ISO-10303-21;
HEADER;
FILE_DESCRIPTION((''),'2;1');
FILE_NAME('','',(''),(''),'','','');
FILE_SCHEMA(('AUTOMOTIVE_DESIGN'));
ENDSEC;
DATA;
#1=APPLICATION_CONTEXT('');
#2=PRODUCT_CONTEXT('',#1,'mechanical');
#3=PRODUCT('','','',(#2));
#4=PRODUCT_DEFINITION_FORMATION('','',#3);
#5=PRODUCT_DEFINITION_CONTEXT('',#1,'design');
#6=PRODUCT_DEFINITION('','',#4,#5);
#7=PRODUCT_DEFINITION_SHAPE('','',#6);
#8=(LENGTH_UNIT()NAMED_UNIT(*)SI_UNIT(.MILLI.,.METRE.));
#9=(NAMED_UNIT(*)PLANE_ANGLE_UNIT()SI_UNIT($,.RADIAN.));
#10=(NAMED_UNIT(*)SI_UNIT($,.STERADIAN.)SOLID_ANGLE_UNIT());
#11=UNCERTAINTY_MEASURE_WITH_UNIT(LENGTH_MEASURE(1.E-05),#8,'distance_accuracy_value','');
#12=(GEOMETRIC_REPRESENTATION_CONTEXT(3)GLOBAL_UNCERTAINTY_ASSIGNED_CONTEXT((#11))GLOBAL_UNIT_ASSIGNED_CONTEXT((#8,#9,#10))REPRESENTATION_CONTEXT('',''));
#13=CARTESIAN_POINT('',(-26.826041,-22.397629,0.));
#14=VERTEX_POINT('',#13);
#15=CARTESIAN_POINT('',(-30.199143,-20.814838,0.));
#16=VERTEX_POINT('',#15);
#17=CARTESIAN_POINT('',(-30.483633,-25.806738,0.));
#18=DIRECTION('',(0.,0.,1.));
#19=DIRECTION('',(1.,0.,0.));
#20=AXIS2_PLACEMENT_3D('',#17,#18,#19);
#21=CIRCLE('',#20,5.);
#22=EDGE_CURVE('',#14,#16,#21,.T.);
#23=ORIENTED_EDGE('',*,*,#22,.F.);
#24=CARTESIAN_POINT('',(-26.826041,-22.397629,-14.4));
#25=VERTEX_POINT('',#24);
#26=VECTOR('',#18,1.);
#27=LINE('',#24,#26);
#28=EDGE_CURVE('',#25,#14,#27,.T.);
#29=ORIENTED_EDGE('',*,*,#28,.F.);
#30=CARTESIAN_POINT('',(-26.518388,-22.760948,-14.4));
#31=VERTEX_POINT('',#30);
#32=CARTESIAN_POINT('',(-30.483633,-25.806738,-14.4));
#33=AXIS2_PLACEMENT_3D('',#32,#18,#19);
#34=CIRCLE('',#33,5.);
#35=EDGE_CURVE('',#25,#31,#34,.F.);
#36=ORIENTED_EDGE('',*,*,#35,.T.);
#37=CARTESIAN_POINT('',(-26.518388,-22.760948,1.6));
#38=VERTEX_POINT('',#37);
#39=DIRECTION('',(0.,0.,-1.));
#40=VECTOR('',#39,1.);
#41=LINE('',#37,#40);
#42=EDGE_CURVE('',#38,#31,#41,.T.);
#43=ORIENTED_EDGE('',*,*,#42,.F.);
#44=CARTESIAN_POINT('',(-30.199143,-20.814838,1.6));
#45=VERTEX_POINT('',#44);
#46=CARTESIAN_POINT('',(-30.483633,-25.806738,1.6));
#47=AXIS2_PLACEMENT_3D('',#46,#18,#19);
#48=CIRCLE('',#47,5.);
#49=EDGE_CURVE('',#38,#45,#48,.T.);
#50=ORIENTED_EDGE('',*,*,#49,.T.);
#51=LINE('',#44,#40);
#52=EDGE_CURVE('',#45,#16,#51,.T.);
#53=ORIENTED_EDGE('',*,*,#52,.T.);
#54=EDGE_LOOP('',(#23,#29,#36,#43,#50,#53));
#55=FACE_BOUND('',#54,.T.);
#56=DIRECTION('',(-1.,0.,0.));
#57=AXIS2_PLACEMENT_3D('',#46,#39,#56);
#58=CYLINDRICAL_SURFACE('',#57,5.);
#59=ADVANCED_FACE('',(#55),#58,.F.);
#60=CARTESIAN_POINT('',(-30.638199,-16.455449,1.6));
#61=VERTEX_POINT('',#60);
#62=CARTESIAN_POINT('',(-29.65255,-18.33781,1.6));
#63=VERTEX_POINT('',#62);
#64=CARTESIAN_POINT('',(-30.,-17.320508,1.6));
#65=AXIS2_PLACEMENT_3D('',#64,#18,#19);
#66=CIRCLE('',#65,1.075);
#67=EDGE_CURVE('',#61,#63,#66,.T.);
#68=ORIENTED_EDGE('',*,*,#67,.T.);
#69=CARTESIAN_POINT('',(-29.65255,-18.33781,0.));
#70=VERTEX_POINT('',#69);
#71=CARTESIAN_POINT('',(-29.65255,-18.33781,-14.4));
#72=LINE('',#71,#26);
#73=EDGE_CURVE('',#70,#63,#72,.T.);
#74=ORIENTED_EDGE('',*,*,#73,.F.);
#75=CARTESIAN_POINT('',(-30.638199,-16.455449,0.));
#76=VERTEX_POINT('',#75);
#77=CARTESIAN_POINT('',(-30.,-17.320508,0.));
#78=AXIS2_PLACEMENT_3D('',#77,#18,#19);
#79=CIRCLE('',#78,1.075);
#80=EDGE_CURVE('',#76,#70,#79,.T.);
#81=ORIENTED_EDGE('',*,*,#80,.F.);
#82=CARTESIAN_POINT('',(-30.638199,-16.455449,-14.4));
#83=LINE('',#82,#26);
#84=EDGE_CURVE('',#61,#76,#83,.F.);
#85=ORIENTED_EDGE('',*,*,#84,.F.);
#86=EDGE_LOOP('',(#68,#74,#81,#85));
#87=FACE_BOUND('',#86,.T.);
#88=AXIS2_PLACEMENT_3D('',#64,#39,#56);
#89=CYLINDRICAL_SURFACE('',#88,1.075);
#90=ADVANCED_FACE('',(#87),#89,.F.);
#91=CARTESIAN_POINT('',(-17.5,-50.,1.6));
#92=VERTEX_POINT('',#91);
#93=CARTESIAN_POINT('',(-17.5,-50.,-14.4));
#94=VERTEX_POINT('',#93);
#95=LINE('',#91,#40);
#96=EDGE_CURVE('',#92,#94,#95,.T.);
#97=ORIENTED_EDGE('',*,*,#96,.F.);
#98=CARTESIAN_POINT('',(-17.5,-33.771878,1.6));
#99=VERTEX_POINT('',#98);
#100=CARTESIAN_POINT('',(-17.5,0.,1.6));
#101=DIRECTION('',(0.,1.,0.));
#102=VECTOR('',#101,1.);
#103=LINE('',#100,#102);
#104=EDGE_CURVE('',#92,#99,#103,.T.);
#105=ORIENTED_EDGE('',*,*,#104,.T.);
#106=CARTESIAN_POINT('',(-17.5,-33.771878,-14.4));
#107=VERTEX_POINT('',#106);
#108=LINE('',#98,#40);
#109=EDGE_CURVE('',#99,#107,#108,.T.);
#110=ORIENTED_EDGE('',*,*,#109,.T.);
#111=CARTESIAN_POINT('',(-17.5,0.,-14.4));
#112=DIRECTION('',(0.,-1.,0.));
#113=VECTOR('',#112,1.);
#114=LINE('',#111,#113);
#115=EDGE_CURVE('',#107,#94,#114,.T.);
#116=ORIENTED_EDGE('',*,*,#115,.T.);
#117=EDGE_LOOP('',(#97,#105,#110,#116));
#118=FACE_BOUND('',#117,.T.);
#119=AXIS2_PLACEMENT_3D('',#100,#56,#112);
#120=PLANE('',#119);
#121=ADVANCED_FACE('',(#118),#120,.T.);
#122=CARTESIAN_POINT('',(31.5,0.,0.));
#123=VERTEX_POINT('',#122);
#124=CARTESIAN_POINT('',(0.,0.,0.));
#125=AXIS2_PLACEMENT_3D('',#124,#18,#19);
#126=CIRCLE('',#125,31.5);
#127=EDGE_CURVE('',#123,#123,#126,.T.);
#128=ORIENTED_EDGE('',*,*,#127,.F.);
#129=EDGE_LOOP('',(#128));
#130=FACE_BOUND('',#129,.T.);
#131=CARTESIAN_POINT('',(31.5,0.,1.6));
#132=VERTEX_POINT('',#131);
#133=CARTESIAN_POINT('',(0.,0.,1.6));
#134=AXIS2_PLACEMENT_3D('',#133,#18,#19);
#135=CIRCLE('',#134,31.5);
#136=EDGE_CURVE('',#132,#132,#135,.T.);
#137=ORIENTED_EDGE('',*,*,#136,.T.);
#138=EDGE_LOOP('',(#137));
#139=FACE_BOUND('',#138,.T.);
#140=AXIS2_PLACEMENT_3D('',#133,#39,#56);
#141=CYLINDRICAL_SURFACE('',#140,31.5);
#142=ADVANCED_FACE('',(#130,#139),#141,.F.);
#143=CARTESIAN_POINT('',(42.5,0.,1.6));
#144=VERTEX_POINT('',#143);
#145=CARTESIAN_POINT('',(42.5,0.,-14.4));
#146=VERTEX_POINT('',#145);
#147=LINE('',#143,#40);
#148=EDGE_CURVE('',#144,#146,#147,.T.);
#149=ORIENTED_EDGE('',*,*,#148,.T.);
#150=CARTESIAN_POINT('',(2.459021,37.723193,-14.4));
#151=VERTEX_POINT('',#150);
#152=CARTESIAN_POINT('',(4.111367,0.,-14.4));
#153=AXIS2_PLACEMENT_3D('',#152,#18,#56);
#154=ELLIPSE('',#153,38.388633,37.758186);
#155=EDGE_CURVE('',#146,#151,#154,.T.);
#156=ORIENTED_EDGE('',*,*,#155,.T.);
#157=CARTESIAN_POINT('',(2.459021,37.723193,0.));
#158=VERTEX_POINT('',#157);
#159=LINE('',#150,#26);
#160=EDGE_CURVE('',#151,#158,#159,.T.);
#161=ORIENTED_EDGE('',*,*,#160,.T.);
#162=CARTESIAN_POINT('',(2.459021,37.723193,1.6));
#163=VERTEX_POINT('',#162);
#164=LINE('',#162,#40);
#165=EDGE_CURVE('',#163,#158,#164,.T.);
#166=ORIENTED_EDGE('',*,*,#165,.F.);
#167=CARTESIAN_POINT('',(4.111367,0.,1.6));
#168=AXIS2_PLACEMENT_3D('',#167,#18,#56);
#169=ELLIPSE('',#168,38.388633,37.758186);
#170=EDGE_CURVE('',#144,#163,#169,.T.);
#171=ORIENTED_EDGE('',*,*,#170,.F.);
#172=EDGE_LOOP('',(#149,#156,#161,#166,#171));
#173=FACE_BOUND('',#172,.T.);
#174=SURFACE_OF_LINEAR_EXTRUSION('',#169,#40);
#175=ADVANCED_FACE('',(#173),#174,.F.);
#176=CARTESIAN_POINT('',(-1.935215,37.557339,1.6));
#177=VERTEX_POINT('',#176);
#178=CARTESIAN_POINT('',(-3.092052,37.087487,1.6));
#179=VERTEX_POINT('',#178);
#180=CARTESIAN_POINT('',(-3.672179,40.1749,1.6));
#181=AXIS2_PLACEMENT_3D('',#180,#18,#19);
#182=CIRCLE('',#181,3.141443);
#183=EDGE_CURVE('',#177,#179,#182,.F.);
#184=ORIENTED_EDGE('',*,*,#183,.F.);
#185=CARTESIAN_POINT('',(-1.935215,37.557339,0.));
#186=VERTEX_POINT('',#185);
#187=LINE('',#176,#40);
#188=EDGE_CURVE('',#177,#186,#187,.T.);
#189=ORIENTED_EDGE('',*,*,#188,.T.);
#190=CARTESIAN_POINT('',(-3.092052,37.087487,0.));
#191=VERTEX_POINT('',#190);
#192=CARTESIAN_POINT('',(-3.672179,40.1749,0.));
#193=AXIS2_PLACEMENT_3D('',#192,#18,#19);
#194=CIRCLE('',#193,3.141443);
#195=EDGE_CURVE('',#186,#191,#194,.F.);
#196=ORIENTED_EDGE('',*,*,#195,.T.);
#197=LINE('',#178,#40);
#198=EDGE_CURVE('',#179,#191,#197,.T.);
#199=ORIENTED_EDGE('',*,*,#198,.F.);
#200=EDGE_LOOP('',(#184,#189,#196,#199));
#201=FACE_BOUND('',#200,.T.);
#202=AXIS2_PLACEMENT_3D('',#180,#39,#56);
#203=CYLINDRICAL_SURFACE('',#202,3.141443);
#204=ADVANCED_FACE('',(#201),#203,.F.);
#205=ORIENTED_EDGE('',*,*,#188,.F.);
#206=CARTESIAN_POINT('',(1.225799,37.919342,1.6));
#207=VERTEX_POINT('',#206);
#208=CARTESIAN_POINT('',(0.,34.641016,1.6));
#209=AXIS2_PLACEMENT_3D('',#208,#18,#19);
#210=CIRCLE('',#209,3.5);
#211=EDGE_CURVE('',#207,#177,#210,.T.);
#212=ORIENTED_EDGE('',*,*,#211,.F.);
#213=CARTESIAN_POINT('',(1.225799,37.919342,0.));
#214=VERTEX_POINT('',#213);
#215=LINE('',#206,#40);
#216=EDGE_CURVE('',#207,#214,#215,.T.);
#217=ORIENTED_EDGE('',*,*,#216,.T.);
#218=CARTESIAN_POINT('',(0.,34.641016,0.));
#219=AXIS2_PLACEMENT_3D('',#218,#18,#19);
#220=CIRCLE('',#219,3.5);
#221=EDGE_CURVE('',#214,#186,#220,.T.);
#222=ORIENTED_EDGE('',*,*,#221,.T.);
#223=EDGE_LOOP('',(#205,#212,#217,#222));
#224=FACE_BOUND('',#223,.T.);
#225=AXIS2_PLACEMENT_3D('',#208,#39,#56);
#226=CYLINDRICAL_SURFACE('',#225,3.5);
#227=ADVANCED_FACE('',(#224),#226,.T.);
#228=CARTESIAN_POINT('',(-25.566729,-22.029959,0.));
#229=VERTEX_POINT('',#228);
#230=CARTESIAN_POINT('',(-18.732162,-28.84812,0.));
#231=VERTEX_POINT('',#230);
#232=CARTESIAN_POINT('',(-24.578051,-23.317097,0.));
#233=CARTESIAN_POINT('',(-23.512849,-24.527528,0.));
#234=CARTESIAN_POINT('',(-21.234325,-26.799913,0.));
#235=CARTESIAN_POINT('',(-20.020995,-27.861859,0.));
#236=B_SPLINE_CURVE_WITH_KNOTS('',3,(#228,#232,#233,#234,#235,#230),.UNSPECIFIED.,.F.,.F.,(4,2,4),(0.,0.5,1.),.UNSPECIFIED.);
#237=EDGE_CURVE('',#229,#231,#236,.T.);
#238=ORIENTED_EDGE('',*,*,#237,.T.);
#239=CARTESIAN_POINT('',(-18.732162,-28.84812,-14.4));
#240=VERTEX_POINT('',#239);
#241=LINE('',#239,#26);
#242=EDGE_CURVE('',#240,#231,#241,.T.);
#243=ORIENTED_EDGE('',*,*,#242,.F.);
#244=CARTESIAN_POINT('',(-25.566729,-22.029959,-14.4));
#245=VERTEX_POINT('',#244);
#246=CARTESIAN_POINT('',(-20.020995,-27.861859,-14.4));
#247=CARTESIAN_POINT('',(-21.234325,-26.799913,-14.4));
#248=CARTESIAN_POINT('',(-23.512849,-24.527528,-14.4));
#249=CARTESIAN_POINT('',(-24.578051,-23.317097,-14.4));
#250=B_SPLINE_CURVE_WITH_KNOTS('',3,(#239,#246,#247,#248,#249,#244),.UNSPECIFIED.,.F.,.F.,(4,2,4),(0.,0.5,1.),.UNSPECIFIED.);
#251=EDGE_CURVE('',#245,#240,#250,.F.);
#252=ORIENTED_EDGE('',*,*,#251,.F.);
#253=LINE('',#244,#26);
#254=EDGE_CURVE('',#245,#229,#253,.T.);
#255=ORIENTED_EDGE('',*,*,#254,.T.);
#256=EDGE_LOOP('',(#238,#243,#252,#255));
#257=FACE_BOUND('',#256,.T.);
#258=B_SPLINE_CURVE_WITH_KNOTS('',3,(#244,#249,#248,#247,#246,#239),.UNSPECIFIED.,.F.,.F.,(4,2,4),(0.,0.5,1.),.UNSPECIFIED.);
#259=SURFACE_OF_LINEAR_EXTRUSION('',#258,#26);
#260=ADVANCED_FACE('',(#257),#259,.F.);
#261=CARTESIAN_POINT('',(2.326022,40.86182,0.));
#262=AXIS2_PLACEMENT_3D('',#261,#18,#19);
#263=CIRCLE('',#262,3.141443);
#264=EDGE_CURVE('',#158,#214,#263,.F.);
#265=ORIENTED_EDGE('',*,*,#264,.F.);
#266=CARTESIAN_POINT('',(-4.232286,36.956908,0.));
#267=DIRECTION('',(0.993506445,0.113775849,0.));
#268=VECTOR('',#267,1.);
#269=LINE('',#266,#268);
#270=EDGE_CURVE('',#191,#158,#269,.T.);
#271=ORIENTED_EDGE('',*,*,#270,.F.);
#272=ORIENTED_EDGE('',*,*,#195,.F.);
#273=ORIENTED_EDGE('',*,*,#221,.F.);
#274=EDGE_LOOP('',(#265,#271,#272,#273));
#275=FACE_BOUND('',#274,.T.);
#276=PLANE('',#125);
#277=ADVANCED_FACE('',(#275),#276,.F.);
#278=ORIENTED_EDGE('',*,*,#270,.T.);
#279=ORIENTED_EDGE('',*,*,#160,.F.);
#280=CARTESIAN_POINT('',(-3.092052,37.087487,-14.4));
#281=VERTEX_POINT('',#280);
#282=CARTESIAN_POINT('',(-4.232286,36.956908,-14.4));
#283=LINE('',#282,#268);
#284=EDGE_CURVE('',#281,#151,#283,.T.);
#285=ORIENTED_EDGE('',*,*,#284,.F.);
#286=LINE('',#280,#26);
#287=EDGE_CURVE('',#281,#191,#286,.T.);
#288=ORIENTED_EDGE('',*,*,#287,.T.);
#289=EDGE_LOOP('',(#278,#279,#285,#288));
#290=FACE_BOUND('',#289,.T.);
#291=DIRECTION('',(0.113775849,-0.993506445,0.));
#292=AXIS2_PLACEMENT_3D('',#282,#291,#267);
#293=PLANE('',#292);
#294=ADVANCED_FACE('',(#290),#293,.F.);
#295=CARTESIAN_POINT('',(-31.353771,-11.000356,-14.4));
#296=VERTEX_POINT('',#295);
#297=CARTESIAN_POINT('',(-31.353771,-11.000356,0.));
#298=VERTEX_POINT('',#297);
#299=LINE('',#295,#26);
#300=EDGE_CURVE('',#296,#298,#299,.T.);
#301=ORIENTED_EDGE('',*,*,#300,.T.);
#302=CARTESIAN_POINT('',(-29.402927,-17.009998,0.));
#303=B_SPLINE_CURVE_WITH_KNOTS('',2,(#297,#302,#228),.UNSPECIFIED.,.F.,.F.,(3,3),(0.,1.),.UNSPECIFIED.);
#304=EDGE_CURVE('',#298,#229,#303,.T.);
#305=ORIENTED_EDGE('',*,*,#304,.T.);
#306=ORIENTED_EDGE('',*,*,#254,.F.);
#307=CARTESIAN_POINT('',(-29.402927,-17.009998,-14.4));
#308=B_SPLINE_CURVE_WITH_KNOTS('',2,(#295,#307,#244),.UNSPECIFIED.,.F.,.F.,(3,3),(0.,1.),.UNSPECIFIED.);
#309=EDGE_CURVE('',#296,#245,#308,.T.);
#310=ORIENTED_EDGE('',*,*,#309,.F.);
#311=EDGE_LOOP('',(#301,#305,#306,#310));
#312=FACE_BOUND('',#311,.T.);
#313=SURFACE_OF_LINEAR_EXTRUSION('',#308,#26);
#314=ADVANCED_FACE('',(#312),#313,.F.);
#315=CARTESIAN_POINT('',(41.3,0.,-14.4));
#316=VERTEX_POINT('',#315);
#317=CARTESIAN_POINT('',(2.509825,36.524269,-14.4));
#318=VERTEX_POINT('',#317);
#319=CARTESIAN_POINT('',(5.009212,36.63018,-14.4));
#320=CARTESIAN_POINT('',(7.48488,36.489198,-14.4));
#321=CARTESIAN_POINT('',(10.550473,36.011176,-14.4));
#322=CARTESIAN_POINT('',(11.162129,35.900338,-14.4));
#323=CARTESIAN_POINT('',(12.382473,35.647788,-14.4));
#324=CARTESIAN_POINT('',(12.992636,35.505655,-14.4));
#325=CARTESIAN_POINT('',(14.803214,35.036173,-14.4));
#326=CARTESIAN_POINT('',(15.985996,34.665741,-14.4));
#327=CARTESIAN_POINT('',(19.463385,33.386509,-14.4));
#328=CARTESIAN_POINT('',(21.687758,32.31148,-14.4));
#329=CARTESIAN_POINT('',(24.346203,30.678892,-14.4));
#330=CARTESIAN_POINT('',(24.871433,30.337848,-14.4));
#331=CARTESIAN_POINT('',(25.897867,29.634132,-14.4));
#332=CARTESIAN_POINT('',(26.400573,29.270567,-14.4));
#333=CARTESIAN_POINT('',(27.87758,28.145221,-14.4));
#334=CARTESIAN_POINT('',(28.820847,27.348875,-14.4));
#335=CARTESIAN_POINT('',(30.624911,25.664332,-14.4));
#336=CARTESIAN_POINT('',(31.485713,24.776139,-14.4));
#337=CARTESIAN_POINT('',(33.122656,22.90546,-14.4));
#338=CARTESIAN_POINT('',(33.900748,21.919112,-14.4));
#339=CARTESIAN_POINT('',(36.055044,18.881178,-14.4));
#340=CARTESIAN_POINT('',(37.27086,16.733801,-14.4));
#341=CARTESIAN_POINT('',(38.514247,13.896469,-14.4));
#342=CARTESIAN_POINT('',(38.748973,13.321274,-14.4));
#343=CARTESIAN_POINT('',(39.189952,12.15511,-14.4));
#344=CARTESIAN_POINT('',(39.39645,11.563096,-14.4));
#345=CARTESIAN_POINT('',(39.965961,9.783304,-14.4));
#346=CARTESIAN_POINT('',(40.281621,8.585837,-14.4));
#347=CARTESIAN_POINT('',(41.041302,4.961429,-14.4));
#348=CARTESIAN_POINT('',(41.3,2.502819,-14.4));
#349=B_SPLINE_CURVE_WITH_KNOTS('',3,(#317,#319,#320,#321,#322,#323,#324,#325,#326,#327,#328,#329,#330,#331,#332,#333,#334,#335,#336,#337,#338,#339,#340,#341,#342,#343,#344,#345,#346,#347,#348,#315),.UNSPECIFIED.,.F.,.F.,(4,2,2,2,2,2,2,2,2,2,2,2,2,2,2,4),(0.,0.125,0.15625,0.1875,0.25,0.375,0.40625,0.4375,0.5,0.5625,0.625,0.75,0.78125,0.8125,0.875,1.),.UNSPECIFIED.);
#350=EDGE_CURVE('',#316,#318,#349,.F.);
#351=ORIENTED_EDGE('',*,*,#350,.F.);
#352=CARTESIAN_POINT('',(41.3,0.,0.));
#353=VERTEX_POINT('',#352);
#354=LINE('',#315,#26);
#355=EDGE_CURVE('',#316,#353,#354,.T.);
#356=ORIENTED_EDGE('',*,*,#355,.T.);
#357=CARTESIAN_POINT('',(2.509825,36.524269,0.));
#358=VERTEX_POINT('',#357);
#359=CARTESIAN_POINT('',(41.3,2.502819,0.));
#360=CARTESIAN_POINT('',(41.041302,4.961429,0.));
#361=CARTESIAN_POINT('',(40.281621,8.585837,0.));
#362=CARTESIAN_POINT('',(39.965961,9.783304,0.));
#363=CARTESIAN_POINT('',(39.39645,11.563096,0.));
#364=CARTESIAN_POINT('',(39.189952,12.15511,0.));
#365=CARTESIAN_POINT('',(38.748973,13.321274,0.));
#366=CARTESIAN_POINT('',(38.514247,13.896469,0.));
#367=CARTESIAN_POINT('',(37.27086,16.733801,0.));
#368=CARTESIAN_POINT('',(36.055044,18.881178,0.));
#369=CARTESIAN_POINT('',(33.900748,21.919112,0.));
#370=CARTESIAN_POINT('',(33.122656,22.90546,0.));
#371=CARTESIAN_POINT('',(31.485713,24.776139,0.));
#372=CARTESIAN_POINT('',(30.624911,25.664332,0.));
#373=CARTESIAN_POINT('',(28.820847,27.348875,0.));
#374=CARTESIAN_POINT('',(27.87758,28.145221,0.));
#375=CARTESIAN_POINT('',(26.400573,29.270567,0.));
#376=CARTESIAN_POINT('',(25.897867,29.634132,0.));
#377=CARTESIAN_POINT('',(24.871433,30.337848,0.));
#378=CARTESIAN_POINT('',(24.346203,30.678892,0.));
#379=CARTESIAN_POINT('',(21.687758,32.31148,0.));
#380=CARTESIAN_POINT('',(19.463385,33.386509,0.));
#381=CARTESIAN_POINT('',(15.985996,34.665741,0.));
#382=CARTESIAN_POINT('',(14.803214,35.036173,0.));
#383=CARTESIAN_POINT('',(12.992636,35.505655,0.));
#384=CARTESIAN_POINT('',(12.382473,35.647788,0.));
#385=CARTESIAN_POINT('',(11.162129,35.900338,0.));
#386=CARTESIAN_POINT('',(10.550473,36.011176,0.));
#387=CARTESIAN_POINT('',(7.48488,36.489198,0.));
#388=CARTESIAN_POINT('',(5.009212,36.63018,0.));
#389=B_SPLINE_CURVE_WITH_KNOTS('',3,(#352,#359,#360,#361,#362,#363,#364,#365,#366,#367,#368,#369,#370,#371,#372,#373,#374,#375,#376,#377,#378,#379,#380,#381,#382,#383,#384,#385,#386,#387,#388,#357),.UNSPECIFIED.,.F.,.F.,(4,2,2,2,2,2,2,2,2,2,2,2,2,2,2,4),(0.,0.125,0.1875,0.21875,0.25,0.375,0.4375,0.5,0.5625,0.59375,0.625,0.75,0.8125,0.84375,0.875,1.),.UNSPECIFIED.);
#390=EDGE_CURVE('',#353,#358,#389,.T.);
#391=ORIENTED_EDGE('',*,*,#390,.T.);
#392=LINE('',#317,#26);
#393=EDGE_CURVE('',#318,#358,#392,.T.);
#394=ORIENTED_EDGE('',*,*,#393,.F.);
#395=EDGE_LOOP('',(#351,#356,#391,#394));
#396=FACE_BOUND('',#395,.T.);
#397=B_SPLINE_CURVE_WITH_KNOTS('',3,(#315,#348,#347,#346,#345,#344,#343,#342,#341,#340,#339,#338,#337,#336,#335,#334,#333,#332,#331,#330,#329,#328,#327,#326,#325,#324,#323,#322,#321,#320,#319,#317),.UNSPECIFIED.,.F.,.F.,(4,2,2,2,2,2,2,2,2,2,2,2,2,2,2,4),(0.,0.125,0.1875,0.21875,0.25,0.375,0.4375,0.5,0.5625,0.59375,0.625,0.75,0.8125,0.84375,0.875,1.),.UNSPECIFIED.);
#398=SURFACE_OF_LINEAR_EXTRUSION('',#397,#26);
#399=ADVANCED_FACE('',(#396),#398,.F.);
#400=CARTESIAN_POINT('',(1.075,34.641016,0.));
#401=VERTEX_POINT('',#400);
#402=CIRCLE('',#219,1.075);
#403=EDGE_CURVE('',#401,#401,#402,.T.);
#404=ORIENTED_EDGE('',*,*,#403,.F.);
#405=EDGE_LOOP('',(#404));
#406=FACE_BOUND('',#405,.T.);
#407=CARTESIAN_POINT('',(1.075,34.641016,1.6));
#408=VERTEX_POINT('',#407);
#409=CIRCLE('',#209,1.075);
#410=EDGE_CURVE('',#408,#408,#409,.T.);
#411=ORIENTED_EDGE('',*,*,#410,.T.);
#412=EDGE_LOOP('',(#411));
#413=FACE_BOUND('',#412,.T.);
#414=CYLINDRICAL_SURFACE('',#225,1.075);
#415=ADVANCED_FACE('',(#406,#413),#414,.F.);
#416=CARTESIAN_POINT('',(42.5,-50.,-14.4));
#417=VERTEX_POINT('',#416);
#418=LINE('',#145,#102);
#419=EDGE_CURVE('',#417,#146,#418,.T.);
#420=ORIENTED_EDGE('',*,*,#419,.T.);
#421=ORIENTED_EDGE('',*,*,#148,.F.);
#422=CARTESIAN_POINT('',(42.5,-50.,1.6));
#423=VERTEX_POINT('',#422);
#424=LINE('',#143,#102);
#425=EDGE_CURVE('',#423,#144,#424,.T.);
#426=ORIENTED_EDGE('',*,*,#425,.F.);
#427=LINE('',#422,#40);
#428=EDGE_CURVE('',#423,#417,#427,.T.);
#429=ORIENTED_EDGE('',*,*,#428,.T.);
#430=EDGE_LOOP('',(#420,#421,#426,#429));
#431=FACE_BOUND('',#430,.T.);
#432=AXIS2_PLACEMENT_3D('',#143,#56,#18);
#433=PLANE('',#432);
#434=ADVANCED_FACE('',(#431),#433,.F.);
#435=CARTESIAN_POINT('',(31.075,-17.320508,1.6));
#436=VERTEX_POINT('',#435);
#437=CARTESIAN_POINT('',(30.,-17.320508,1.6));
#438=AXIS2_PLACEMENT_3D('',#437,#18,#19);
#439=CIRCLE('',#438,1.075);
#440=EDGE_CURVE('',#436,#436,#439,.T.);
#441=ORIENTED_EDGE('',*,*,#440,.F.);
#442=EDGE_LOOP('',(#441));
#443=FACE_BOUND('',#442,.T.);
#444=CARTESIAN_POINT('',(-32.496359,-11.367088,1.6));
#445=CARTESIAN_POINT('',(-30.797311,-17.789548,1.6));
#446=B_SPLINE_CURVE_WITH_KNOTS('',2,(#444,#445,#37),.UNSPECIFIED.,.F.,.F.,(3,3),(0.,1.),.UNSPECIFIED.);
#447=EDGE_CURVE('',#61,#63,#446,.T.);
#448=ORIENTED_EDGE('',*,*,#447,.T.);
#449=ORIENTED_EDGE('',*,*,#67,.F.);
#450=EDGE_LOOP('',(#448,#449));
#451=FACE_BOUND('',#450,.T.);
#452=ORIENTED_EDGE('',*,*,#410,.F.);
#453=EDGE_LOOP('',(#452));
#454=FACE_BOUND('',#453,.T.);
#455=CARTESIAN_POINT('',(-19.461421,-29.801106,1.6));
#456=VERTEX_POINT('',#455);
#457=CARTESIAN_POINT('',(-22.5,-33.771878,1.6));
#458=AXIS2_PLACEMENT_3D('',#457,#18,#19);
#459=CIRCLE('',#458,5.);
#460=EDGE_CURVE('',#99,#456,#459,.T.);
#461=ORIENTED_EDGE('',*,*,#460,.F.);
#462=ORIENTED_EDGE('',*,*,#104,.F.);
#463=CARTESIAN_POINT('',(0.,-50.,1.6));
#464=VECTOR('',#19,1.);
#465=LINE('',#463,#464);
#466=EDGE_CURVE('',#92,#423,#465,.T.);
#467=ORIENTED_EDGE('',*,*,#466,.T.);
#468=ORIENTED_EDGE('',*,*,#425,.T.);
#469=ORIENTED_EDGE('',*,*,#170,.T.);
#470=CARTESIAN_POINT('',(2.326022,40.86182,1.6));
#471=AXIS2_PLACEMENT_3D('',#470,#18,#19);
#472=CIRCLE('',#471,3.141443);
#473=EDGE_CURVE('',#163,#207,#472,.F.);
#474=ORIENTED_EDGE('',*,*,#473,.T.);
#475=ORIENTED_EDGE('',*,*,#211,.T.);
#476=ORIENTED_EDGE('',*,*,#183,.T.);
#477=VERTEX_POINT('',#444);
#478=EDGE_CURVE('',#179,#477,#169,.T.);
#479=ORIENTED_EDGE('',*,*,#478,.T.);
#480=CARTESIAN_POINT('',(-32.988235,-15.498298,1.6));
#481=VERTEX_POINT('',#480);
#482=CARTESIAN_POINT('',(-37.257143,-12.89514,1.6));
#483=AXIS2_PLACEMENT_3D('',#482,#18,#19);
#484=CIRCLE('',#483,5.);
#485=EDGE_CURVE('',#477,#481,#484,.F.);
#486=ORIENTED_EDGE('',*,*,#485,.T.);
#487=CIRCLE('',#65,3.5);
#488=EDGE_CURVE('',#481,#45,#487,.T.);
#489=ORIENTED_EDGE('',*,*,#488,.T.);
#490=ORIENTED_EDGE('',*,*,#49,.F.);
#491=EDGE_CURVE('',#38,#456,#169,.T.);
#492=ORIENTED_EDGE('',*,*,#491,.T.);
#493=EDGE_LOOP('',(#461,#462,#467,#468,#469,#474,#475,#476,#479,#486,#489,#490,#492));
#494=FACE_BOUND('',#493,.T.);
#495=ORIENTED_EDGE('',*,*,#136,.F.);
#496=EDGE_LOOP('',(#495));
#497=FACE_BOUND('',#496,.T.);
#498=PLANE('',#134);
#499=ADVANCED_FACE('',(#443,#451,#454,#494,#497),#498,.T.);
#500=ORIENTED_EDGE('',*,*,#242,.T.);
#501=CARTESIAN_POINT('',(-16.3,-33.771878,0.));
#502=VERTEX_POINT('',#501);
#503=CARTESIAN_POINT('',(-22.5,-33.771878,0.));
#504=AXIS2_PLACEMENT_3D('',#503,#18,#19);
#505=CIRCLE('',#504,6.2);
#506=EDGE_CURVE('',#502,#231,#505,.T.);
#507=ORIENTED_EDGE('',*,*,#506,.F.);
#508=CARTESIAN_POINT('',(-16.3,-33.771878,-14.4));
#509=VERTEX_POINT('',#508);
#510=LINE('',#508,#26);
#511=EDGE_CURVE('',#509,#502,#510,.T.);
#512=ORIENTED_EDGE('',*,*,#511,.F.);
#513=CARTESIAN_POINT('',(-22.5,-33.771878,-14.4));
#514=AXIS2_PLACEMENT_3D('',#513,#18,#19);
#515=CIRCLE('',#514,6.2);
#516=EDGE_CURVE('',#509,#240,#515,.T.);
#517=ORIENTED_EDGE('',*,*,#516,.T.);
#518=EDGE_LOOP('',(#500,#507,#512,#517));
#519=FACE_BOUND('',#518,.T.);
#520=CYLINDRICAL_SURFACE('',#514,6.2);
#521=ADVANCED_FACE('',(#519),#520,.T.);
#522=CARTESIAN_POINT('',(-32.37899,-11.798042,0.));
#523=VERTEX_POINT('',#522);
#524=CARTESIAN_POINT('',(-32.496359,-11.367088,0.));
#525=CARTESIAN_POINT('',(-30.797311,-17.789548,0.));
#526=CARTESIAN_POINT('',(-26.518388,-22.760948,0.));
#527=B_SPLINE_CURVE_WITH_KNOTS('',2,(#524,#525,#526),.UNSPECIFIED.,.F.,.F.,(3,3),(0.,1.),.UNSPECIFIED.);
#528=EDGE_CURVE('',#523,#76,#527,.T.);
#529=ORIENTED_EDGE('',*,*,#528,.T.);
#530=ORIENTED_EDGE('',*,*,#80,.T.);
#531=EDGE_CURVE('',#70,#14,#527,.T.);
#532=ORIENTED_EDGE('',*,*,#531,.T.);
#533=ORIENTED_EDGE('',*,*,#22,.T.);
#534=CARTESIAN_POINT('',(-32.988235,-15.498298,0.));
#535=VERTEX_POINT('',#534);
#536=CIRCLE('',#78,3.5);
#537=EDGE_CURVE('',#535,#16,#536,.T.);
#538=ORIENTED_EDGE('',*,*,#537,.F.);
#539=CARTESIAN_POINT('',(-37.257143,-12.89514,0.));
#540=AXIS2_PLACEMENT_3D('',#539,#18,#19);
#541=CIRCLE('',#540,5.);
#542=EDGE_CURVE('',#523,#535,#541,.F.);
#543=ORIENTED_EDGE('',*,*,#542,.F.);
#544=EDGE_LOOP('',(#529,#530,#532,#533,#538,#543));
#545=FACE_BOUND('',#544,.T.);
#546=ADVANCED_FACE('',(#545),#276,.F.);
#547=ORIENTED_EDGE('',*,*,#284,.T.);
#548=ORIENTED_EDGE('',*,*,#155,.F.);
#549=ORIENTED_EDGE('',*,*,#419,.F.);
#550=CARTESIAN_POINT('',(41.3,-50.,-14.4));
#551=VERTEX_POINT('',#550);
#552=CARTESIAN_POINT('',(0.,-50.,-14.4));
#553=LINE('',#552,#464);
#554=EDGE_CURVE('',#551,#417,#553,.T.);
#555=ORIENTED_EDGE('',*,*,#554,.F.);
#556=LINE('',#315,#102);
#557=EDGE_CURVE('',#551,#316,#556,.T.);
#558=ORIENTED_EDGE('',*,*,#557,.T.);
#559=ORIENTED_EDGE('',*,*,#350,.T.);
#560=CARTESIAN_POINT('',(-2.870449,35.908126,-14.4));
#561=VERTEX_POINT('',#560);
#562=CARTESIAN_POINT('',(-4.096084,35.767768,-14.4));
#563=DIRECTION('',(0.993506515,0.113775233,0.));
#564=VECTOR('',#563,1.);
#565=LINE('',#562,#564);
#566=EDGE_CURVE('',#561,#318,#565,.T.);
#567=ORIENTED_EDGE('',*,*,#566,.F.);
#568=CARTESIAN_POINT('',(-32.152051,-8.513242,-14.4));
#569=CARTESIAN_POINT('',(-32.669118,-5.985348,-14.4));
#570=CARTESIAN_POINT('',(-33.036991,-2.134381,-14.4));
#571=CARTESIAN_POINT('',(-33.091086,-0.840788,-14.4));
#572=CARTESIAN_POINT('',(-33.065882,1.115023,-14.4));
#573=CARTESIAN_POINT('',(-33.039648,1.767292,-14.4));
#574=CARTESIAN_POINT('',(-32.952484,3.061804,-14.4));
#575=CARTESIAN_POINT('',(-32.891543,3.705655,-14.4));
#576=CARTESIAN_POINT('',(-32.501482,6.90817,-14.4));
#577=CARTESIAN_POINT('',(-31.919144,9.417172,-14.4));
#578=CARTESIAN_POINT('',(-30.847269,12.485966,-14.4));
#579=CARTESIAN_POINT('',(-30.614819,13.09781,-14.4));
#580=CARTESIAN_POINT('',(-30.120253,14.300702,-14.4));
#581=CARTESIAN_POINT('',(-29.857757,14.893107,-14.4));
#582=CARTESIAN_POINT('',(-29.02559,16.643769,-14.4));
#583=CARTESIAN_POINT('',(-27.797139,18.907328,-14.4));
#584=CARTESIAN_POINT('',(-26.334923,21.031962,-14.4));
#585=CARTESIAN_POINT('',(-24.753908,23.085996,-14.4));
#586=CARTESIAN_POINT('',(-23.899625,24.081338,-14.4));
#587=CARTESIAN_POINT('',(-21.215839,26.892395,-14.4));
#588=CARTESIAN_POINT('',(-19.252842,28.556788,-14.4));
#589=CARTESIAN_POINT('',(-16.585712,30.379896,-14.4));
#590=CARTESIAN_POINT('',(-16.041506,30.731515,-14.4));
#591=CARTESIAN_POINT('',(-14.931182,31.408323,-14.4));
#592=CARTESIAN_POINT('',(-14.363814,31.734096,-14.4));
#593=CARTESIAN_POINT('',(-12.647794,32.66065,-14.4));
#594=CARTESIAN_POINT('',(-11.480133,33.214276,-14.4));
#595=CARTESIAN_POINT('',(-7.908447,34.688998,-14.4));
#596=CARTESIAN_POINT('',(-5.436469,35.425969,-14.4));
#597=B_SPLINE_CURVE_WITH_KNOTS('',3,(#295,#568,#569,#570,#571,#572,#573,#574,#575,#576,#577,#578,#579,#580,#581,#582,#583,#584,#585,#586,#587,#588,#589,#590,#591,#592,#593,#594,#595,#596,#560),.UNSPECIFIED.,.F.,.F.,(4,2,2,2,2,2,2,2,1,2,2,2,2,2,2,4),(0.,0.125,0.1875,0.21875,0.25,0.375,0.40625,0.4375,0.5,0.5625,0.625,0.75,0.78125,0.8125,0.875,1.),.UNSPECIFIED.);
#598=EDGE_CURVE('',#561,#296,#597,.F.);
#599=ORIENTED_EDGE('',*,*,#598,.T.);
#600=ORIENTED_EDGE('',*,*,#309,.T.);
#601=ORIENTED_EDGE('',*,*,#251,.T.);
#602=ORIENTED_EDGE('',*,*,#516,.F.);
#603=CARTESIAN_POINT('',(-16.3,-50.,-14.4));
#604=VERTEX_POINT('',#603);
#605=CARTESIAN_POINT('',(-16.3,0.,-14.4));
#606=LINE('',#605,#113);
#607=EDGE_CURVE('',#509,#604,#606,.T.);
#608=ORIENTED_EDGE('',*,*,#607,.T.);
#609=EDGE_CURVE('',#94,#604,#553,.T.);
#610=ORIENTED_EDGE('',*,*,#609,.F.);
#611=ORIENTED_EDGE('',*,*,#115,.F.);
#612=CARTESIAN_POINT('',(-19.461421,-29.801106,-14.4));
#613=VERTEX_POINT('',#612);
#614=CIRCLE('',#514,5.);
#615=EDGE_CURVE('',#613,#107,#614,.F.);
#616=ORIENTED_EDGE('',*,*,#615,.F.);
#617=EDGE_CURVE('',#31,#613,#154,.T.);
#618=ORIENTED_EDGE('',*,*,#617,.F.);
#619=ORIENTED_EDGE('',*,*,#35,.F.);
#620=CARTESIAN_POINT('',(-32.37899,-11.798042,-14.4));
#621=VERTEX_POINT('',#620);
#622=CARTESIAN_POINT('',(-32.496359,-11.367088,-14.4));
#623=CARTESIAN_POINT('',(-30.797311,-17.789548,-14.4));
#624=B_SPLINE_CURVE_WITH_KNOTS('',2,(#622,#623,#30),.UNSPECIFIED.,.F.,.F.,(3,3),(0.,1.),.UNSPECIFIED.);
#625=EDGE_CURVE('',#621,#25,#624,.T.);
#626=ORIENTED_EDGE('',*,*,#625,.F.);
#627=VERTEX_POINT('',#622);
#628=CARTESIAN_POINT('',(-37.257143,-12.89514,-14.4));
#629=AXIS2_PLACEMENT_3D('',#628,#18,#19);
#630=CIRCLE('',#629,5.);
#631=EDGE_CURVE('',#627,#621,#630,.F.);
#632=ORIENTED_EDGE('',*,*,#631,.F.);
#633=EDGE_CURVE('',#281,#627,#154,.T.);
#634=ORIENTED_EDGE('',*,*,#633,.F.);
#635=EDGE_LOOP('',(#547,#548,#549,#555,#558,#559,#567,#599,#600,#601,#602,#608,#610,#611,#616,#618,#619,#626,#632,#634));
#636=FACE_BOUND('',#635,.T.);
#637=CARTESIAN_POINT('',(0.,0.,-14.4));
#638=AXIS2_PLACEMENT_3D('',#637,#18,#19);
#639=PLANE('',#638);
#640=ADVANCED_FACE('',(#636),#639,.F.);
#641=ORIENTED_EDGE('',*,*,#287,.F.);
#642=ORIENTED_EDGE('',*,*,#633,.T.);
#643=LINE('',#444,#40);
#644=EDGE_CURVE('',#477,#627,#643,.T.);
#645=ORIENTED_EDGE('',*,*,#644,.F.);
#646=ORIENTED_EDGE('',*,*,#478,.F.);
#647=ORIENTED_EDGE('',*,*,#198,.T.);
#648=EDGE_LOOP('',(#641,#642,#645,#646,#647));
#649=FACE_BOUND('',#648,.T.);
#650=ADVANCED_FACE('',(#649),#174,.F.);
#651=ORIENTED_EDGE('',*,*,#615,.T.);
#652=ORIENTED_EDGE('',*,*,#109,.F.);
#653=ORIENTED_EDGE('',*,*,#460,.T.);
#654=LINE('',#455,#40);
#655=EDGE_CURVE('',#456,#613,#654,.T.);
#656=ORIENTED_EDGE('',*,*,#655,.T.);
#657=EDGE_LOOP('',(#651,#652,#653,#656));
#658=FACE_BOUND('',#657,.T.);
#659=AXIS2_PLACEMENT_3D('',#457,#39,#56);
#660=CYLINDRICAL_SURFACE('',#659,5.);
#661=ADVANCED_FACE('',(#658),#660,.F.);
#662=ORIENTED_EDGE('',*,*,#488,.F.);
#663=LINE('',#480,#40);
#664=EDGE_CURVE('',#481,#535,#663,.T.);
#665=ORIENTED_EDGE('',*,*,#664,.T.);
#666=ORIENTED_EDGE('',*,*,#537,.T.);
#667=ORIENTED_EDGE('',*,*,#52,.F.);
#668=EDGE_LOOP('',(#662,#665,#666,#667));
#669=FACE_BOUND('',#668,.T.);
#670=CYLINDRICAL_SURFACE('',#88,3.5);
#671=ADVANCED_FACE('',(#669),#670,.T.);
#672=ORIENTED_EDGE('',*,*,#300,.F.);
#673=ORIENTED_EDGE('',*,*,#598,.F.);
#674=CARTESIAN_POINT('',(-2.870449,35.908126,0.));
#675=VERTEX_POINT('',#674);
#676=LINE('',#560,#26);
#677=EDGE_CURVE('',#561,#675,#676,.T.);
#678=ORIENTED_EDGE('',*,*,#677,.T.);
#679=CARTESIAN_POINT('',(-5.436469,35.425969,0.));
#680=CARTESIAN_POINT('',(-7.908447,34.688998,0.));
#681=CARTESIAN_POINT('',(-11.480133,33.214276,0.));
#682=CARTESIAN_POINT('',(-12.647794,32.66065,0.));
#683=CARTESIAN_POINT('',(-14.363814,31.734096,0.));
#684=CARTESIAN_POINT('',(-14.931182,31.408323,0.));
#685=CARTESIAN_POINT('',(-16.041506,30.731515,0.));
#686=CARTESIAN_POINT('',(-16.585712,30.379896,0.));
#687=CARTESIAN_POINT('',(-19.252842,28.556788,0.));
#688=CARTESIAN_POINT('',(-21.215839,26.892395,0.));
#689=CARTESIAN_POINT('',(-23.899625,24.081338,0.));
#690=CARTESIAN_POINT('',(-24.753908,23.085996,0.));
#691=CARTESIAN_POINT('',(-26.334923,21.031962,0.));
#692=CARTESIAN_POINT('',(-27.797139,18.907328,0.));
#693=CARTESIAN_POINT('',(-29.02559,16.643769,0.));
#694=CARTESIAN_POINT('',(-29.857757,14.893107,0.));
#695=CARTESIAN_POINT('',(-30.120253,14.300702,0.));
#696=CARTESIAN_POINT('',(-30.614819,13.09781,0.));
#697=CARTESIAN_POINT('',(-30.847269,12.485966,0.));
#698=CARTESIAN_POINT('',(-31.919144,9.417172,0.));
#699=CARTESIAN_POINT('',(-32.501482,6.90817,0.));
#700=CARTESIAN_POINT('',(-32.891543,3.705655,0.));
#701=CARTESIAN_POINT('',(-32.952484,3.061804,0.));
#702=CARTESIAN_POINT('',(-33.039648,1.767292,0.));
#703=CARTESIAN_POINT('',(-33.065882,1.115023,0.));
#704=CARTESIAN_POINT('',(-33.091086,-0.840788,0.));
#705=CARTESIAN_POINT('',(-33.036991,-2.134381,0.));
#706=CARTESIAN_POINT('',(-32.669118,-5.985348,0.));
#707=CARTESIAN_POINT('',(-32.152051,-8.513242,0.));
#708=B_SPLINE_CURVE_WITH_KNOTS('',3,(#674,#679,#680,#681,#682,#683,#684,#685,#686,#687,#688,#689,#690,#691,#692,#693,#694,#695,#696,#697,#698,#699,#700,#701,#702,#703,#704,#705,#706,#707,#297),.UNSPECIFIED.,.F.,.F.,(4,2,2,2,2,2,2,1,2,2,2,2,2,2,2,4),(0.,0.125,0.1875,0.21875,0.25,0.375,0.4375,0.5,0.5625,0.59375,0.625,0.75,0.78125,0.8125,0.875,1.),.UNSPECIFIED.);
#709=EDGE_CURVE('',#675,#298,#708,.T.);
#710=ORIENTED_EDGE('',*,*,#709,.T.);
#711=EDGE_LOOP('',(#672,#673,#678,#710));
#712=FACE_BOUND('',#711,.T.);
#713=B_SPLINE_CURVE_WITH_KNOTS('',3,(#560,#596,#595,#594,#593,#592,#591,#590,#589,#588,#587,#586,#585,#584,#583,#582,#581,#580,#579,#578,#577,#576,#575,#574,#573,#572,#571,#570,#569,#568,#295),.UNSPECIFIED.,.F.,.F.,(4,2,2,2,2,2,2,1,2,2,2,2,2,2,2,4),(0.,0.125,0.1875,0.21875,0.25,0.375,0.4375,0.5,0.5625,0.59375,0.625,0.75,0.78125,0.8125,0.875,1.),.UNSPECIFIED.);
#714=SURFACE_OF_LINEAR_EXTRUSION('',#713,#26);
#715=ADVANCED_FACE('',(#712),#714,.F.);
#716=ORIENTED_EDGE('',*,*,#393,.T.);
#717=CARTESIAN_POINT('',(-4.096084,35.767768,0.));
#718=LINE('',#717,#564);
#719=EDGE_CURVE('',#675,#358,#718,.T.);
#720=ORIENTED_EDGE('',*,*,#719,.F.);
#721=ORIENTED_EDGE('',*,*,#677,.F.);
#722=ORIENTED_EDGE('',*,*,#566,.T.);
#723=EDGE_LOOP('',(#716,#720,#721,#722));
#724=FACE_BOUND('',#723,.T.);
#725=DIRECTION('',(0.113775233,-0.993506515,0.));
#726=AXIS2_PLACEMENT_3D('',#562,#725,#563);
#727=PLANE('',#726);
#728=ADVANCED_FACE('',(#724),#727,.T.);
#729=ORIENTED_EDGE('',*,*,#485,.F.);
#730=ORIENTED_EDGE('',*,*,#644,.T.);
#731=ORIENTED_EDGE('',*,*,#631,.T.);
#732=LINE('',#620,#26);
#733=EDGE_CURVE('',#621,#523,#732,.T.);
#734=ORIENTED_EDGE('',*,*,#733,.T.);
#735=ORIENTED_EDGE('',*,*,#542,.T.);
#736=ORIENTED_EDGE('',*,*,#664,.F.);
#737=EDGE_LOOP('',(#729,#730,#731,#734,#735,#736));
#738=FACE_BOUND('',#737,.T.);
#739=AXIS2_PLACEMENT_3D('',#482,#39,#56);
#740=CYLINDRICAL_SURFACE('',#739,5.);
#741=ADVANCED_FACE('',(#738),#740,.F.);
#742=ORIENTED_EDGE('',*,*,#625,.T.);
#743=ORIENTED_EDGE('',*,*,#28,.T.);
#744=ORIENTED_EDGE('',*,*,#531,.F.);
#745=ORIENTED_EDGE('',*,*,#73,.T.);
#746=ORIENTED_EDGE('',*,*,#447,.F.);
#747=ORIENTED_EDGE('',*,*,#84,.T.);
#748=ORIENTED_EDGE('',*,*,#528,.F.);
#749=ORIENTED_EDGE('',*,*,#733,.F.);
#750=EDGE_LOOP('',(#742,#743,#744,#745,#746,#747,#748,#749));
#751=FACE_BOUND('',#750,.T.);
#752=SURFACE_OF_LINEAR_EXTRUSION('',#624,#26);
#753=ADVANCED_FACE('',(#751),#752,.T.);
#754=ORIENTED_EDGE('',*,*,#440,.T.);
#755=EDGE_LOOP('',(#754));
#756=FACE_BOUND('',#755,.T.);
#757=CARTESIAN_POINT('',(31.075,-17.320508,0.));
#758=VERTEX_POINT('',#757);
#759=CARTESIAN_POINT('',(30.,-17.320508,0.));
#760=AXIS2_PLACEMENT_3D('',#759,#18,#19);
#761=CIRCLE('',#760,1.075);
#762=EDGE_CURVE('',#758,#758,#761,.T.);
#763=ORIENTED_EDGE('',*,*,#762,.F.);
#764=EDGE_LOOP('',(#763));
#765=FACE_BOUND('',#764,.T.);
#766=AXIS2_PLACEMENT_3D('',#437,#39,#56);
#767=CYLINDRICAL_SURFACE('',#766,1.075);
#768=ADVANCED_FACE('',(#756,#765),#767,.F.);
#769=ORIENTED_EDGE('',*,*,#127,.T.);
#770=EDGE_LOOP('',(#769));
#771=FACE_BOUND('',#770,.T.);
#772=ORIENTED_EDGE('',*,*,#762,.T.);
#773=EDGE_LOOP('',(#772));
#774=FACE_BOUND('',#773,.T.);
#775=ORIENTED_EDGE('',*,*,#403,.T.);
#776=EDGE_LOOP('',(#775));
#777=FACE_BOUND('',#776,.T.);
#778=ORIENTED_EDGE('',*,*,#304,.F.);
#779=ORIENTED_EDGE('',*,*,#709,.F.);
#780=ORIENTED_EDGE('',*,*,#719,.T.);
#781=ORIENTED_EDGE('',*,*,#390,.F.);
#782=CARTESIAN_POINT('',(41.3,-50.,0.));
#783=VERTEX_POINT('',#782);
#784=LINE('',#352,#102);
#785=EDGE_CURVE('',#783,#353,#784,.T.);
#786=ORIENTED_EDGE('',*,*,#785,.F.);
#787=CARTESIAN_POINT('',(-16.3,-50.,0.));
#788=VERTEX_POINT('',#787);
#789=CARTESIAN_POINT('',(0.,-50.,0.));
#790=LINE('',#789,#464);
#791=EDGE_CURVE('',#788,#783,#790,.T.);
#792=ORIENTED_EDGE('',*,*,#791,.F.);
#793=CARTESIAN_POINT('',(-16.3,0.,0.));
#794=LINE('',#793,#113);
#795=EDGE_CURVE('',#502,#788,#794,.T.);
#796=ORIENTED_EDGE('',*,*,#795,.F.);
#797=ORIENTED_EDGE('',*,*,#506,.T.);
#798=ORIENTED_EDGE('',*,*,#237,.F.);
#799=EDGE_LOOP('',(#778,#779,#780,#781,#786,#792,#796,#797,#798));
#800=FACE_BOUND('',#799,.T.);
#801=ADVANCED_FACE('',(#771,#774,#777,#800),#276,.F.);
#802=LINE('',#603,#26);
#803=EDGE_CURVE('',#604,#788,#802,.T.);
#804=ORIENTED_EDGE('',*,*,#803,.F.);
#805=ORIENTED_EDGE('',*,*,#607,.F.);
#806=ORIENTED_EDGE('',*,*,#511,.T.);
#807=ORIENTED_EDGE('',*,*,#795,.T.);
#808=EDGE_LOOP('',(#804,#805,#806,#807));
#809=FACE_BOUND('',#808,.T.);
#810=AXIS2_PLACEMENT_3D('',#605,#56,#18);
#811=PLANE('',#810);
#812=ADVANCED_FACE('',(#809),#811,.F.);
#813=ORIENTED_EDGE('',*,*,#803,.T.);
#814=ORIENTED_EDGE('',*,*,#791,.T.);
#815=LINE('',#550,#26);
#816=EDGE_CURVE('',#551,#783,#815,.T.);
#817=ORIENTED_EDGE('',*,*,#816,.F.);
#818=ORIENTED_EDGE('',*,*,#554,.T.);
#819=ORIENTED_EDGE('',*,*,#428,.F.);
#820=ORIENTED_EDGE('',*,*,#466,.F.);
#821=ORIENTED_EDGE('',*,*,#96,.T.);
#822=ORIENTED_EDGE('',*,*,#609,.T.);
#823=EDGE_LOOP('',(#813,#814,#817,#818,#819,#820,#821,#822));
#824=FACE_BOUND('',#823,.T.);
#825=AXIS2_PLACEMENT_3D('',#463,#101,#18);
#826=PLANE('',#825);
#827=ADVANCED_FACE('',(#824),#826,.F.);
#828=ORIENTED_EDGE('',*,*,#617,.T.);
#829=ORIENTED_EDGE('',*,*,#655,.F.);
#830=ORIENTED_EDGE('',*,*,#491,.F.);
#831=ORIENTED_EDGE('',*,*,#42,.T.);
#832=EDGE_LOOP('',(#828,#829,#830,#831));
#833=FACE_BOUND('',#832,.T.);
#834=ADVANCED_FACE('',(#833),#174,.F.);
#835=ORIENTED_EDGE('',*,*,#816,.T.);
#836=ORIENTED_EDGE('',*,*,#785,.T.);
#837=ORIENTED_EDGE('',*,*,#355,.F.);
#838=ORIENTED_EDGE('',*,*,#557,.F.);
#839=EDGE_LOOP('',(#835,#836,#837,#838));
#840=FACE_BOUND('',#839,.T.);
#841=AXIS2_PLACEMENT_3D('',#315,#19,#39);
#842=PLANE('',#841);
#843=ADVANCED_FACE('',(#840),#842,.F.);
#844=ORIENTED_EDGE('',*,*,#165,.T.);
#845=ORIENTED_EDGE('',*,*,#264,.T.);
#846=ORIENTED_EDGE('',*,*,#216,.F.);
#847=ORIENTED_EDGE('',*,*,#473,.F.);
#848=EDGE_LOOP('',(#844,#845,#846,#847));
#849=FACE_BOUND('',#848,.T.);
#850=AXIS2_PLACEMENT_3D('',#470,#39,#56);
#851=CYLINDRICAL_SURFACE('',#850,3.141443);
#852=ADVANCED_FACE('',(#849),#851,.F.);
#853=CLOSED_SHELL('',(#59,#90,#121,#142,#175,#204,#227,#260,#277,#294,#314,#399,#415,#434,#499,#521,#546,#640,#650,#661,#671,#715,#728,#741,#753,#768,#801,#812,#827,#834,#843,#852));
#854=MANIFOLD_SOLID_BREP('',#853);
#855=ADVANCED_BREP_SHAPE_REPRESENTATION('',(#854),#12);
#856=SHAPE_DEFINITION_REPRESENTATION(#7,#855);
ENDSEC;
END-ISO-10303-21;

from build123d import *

# Parameters (mm, degrees)
SKETCH1_R           = 1.075
SKETCH1_R_2         = 31.5
EXTRUDE_BASE_DEPTH  = 1.6
BOSS_EXTRUDE9_START = -16
BOSS_EXTRUDE9_DEPTH = 16


with BuildPart() as part:
    # Sketch1 → extrude-base (new body)
    with BuildSketch(Plane.XY):
        with BuildLine():
            Line((-17.5, -33.771878401), (-17.5, -50))
            Line((-17.5, -50), (42.5, -50))
            Line((42.5, -50), (42.5, -32.5))
            Line((42.5, -32.5), (42.5, 0))
            add(Edge.make_bspline(
                [(42.5, 0), (42.5, 39.41992847), (2.459020818, 37.72319297)],
                knots=[3.141592654, 3.141592654, 3.141592654, 4.755444864, 4.755444864, 4.755444864], degree=2, weights=[1, 0.691721555, 1]))
            ThreePointArc((2.459020818, 37.72319297), (1.83256577, 37.75937423), (1.22579937, 37.919341562))
            ThreePointArc((1.22579937, 37.919341562), (-0.398220056, 38.118288195), (-1.935215493, 37.5573391))
            ThreePointArc((-1.935215493, 37.5573391), (-2.490054876, 37.26435889), (-3.09205194, 37.087486962))
            add(Edge.make_bspline(
                [(-3.09205194, 37.087486962), (-45.49154498, 29.120596422), (-32.496359083, -11.367088447)],
                knots=[4.901152551, 4.901152551, 4.901152551, 6.588978479, 6.588978479, 6.588978479], degree=2, weights=[1, 0.664543961, 1]))
            ThreePointArc((-32.496359083, -11.367088447), (-32.292210371, -13.486281945), (-32.988235187, -15.498297659))
            ThreePointArc((-32.988235187, -15.498297659), (-33.099394368, -18.946470872), (-30.199142861, -20.814838092))
            ThreePointArc((-30.199142861, -20.814838092), (-28.146562368, -21.386545462), (-26.51838784, -22.760948497))
            add(Edge.make_bspline(
                [(-26.51838784, -22.760948497), (-23.462509142, -26.739328), (-19.46142089, -29.801105555)],
                knots=[0.647016148, 0.647016148, 0.647016148, 0.90960641, 0.90960641, 0.90960641], degree=2, weights=[1, 0.991393169, 1]))
            ThreePointArc((-19.46142089, -29.801105555), (-18.017093825, -31.557481818), (-17.5, -33.771878401))
        make_face()
        with Locations((-30.000000067, -17.320508092)):
            Circle(SKETCH1_R, mode=Mode.SUBTRACT)
        with Locations((29.999999933, -17.320508323)):
            Circle(SKETCH1_R, mode=Mode.SUBTRACT)
        Circle(SKETCH1_R_2, mode=Mode.SUBTRACT)
        with Locations((4.75e-07, 34.641016217)):
            Circle(SKETCH1_R, mode=Mode.SUBTRACT)
    extrude(amount=EXTRUDE_BASE_DEPTH)

    # Sketch10 → Boss-Extrude9 (add)
    with BuildSketch(Plane.XY.offset(1.6).offset(BOSS_EXTRUDE9_START)):
        with BuildLine():
            ThreePointArc((-19.46142089, -29.801105555), (-18.017093825, -31.557481818), (-17.5, -33.771878401))
            Line((-17.5, -33.771878401), (-17.5, -50))
            Line((-17.5, -50), (-16.3, -50))
            Line((-16.3, -50), (-16.3, -33.771878401))
            ThreePointArc((-16.3, -33.771878401), (-16.941196343, -31.026026638), (-18.732161904, -28.848120072))
            add(Edge.make_bspline(
                [(-25.566729106, -22.029958994), (-24.578050638, -23.317097176), (-23.512848671, -24.527527727), (-21.234325104, -26.799912781), (-20.020994759, -27.86185852), (-18.732161904, -28.848120072)],
                knots=[0, 0, 0, 0, 0.5, 0.5, 1, 1, 1, 1], degree=3))
            add(Edge.make_bspline(
                [(-31.353771063, -11.0003561), (-29.402926574, -17.009997513), (-25.566729106, -22.029958994)],
                knots=[0, 0, 0, 1, 1, 1], degree=2))
            add(Edge.make_bspline(
                [(-2.870449298, 35.908126004), (-5.436468745, 35.425969389), (-7.908446803, 34.688998483), (-11.48013295, 33.214275651), (-12.647794485, 32.660650203), (-14.363814313, 31.73409591), (-14.931182069, 31.408323469), (-16.041505892, 30.731515452), (-16.585711755, 30.37989631), (-19.252842137, 28.55678796), (-21.21583927, 26.892395093), (-23.899624838, 24.081338464), (-24.753908137, 23.085995606), (-26.334922562, 21.031961865), (-27.797139019, 18.907327708), (-29.02559046, 16.643769396), (-29.85775681, 14.89310652), (-30.120253088, 14.300701764), (-30.614818965, 13.09780999), (-30.847268804, 12.485965885), (-31.91914351, 9.417171687), (-32.501482258, 6.908170216), (-32.891543237, 3.705654906), (-32.95248376, 3.061803653), (-33.039647527, 1.767292199), (-33.065881554, 1.115023359), (-33.091085507, -0.840788011), (-33.036991084, -2.134381266), (-32.669118059, -5.985347855), (-32.152051166, -8.513241755), (-31.353771063, -11.0003561)],
                knots=[0, 0, 0, 0, 0.125, 0.125, 0.1875, 0.1875, 0.21875, 0.21875, 0.25, 0.25, 0.375, 0.375, 0.4375, 0.4375, 0.5, 0.5625, 0.5625, 0.59375, 0.59375, 0.625, 0.625, 0.75, 0.75, 0.78125, 0.78125, 0.8125, 0.8125, 0.875, 0.875, 1, 1, 1, 1], degree=3))
            Line((-2.870449298, 35.908126004), (2.509825196, 36.524268905))
            add(Edge.make_bspline(
                [(41.3, 0), (41.3, 2.502818734), (41.04130208, 4.961429188), (40.281620587, 8.585837104), (39.96596084, 9.783304118), (39.396449767, 11.56309576), (39.189952319, 12.155110401), (38.748973333, 13.321274183), (38.514247241, 13.896469279), (37.270860158, 16.73380096), (36.055043738, 18.881177517), (33.900747967, 21.919112448), (33.122655894, 22.905459572), (31.485713181, 24.776139158), (30.624910971, 25.664331897), (28.820846522, 27.34887544), (27.877579605, 28.145221035), (26.400572769, 29.270566792), (25.897866794, 29.634131792), (24.87143267, 30.337847815), (24.346202787, 30.678892445), (21.687758086, 32.311479515), (19.463384623, 33.386508759), (15.985995879, 34.665741305), (14.803214467, 35.036173284), (12.992635871, 35.505654836), (12.382473166, 35.647787608), (11.162128702, 35.90033819), (10.550473443, 36.011175912), (7.484880127, 36.489198015), (5.009211723, 36.630180347), (2.509825196, 36.524268905)],
                knots=[0, 0, 0, 0, 0.125, 0.125, 0.1875, 0.1875, 0.21875, 0.21875, 0.25, 0.25, 0.375, 0.375, 0.4375, 0.4375, 0.5, 0.5, 0.5625, 0.5625, 0.59375, 0.59375, 0.625, 0.625, 0.75, 0.75, 0.8125, 0.8125, 0.84375, 0.84375, 0.875, 0.875, 1, 1, 1, 1], degree=3))
            Line((41.3, 0), (41.3, -50))
            Line((41.3, -50), (42.5, -50))
            Line((42.5, -50), (42.5, 0))
            add(Edge.make_bspline(
                [(42.5, 0), (42.5, 7.272816374), (40.709520889, 15.38048571), (36.377186956, 23.35544507), (29.466953178, 29.575937448), (18.075350288, 35.422775935), (14.077470504, 36.812411099), (10.05106521, 37.607236379), (6.150506462, 37.879619583), (2.459020818, 37.72319297)],
                knots=[3.141592654, 3.141592654, 3.141592654, 3.141592654, 3.141592654, 3.141592654, 4.217709058, 4.217709058, 4.217709058, 4.217709058, 4.755444864, 4.755444864, 4.755444864, 4.755444864, 4.755444864, 4.755444864], degree=5, weights=[1, 1, 0.994320542, 0.991840126, 1, 1, 0.999817369, 0.999954298, 1, 1]))
            Line((2.459020818, 37.72319297), (-3.09205194, 37.087486962))
            add(Edge.make_bspline(
                [(-3.09205194, 37.087486962), (-6.72994006, 36.403925571), (-10.480917897, 35.251851793), (-14.244234311, 33.553120472), (-17.846077918, 31.264686538), (-27.980885292, 22.572968302), (-33.523658499, 14.25864054), (-35.587689769, 4.733827824), (-34.835717499, -4.078604305), (-32.496359083, -11.367088447)],
                knots=[4.901152551, 4.901152551, 4.901152551, 4.901152551, 4.901152551, 4.901152551, 5.445946934, 5.445946934, 5.445946934, 5.445946934, 6.588978479, 6.588978479, 6.588978479, 6.588978479, 6.588978479, 6.588978479], degree=5, weights=[1, 1, 1.000006691, 0.999854596, 1, 1, 0.989527804, 0.992928488, 1, 1]))
            ThreePointArc((-32.496359083, -11.367088447), (-32.432859758, -11.58125406), (-32.378989521, -11.79804214))
            add(Edge.make_bspline(
                [(-32.378989521, -11.79804214), (-30.718117642, -17.725309457), (-26.826041177, -22.397628937)],
                knots=[0.033678654, 0.033678654, 0.033678654, 0.963651852, 0.963651852, 0.963651852], degree=2))
            ThreePointArc((-26.826041177, -22.397628937), (-26.667887831, -22.575624954), (-26.51838784, -22.760948497))
            add(Edge.make_bspline(
                [(-26.51838784, -22.760948497), (-23.462509142, -26.739328), (-19.46142089, -29.801105555)],
                knots=[0.647016148, 0.647016148, 0.647016148, 0.90960641, 0.90960641, 0.90960641], degree=2, weights=[1, 0.991393169, 1]))
        make_face()
    extrude(amount=BOSS_EXTRUDE9_DEPTH)


solid = part.part
